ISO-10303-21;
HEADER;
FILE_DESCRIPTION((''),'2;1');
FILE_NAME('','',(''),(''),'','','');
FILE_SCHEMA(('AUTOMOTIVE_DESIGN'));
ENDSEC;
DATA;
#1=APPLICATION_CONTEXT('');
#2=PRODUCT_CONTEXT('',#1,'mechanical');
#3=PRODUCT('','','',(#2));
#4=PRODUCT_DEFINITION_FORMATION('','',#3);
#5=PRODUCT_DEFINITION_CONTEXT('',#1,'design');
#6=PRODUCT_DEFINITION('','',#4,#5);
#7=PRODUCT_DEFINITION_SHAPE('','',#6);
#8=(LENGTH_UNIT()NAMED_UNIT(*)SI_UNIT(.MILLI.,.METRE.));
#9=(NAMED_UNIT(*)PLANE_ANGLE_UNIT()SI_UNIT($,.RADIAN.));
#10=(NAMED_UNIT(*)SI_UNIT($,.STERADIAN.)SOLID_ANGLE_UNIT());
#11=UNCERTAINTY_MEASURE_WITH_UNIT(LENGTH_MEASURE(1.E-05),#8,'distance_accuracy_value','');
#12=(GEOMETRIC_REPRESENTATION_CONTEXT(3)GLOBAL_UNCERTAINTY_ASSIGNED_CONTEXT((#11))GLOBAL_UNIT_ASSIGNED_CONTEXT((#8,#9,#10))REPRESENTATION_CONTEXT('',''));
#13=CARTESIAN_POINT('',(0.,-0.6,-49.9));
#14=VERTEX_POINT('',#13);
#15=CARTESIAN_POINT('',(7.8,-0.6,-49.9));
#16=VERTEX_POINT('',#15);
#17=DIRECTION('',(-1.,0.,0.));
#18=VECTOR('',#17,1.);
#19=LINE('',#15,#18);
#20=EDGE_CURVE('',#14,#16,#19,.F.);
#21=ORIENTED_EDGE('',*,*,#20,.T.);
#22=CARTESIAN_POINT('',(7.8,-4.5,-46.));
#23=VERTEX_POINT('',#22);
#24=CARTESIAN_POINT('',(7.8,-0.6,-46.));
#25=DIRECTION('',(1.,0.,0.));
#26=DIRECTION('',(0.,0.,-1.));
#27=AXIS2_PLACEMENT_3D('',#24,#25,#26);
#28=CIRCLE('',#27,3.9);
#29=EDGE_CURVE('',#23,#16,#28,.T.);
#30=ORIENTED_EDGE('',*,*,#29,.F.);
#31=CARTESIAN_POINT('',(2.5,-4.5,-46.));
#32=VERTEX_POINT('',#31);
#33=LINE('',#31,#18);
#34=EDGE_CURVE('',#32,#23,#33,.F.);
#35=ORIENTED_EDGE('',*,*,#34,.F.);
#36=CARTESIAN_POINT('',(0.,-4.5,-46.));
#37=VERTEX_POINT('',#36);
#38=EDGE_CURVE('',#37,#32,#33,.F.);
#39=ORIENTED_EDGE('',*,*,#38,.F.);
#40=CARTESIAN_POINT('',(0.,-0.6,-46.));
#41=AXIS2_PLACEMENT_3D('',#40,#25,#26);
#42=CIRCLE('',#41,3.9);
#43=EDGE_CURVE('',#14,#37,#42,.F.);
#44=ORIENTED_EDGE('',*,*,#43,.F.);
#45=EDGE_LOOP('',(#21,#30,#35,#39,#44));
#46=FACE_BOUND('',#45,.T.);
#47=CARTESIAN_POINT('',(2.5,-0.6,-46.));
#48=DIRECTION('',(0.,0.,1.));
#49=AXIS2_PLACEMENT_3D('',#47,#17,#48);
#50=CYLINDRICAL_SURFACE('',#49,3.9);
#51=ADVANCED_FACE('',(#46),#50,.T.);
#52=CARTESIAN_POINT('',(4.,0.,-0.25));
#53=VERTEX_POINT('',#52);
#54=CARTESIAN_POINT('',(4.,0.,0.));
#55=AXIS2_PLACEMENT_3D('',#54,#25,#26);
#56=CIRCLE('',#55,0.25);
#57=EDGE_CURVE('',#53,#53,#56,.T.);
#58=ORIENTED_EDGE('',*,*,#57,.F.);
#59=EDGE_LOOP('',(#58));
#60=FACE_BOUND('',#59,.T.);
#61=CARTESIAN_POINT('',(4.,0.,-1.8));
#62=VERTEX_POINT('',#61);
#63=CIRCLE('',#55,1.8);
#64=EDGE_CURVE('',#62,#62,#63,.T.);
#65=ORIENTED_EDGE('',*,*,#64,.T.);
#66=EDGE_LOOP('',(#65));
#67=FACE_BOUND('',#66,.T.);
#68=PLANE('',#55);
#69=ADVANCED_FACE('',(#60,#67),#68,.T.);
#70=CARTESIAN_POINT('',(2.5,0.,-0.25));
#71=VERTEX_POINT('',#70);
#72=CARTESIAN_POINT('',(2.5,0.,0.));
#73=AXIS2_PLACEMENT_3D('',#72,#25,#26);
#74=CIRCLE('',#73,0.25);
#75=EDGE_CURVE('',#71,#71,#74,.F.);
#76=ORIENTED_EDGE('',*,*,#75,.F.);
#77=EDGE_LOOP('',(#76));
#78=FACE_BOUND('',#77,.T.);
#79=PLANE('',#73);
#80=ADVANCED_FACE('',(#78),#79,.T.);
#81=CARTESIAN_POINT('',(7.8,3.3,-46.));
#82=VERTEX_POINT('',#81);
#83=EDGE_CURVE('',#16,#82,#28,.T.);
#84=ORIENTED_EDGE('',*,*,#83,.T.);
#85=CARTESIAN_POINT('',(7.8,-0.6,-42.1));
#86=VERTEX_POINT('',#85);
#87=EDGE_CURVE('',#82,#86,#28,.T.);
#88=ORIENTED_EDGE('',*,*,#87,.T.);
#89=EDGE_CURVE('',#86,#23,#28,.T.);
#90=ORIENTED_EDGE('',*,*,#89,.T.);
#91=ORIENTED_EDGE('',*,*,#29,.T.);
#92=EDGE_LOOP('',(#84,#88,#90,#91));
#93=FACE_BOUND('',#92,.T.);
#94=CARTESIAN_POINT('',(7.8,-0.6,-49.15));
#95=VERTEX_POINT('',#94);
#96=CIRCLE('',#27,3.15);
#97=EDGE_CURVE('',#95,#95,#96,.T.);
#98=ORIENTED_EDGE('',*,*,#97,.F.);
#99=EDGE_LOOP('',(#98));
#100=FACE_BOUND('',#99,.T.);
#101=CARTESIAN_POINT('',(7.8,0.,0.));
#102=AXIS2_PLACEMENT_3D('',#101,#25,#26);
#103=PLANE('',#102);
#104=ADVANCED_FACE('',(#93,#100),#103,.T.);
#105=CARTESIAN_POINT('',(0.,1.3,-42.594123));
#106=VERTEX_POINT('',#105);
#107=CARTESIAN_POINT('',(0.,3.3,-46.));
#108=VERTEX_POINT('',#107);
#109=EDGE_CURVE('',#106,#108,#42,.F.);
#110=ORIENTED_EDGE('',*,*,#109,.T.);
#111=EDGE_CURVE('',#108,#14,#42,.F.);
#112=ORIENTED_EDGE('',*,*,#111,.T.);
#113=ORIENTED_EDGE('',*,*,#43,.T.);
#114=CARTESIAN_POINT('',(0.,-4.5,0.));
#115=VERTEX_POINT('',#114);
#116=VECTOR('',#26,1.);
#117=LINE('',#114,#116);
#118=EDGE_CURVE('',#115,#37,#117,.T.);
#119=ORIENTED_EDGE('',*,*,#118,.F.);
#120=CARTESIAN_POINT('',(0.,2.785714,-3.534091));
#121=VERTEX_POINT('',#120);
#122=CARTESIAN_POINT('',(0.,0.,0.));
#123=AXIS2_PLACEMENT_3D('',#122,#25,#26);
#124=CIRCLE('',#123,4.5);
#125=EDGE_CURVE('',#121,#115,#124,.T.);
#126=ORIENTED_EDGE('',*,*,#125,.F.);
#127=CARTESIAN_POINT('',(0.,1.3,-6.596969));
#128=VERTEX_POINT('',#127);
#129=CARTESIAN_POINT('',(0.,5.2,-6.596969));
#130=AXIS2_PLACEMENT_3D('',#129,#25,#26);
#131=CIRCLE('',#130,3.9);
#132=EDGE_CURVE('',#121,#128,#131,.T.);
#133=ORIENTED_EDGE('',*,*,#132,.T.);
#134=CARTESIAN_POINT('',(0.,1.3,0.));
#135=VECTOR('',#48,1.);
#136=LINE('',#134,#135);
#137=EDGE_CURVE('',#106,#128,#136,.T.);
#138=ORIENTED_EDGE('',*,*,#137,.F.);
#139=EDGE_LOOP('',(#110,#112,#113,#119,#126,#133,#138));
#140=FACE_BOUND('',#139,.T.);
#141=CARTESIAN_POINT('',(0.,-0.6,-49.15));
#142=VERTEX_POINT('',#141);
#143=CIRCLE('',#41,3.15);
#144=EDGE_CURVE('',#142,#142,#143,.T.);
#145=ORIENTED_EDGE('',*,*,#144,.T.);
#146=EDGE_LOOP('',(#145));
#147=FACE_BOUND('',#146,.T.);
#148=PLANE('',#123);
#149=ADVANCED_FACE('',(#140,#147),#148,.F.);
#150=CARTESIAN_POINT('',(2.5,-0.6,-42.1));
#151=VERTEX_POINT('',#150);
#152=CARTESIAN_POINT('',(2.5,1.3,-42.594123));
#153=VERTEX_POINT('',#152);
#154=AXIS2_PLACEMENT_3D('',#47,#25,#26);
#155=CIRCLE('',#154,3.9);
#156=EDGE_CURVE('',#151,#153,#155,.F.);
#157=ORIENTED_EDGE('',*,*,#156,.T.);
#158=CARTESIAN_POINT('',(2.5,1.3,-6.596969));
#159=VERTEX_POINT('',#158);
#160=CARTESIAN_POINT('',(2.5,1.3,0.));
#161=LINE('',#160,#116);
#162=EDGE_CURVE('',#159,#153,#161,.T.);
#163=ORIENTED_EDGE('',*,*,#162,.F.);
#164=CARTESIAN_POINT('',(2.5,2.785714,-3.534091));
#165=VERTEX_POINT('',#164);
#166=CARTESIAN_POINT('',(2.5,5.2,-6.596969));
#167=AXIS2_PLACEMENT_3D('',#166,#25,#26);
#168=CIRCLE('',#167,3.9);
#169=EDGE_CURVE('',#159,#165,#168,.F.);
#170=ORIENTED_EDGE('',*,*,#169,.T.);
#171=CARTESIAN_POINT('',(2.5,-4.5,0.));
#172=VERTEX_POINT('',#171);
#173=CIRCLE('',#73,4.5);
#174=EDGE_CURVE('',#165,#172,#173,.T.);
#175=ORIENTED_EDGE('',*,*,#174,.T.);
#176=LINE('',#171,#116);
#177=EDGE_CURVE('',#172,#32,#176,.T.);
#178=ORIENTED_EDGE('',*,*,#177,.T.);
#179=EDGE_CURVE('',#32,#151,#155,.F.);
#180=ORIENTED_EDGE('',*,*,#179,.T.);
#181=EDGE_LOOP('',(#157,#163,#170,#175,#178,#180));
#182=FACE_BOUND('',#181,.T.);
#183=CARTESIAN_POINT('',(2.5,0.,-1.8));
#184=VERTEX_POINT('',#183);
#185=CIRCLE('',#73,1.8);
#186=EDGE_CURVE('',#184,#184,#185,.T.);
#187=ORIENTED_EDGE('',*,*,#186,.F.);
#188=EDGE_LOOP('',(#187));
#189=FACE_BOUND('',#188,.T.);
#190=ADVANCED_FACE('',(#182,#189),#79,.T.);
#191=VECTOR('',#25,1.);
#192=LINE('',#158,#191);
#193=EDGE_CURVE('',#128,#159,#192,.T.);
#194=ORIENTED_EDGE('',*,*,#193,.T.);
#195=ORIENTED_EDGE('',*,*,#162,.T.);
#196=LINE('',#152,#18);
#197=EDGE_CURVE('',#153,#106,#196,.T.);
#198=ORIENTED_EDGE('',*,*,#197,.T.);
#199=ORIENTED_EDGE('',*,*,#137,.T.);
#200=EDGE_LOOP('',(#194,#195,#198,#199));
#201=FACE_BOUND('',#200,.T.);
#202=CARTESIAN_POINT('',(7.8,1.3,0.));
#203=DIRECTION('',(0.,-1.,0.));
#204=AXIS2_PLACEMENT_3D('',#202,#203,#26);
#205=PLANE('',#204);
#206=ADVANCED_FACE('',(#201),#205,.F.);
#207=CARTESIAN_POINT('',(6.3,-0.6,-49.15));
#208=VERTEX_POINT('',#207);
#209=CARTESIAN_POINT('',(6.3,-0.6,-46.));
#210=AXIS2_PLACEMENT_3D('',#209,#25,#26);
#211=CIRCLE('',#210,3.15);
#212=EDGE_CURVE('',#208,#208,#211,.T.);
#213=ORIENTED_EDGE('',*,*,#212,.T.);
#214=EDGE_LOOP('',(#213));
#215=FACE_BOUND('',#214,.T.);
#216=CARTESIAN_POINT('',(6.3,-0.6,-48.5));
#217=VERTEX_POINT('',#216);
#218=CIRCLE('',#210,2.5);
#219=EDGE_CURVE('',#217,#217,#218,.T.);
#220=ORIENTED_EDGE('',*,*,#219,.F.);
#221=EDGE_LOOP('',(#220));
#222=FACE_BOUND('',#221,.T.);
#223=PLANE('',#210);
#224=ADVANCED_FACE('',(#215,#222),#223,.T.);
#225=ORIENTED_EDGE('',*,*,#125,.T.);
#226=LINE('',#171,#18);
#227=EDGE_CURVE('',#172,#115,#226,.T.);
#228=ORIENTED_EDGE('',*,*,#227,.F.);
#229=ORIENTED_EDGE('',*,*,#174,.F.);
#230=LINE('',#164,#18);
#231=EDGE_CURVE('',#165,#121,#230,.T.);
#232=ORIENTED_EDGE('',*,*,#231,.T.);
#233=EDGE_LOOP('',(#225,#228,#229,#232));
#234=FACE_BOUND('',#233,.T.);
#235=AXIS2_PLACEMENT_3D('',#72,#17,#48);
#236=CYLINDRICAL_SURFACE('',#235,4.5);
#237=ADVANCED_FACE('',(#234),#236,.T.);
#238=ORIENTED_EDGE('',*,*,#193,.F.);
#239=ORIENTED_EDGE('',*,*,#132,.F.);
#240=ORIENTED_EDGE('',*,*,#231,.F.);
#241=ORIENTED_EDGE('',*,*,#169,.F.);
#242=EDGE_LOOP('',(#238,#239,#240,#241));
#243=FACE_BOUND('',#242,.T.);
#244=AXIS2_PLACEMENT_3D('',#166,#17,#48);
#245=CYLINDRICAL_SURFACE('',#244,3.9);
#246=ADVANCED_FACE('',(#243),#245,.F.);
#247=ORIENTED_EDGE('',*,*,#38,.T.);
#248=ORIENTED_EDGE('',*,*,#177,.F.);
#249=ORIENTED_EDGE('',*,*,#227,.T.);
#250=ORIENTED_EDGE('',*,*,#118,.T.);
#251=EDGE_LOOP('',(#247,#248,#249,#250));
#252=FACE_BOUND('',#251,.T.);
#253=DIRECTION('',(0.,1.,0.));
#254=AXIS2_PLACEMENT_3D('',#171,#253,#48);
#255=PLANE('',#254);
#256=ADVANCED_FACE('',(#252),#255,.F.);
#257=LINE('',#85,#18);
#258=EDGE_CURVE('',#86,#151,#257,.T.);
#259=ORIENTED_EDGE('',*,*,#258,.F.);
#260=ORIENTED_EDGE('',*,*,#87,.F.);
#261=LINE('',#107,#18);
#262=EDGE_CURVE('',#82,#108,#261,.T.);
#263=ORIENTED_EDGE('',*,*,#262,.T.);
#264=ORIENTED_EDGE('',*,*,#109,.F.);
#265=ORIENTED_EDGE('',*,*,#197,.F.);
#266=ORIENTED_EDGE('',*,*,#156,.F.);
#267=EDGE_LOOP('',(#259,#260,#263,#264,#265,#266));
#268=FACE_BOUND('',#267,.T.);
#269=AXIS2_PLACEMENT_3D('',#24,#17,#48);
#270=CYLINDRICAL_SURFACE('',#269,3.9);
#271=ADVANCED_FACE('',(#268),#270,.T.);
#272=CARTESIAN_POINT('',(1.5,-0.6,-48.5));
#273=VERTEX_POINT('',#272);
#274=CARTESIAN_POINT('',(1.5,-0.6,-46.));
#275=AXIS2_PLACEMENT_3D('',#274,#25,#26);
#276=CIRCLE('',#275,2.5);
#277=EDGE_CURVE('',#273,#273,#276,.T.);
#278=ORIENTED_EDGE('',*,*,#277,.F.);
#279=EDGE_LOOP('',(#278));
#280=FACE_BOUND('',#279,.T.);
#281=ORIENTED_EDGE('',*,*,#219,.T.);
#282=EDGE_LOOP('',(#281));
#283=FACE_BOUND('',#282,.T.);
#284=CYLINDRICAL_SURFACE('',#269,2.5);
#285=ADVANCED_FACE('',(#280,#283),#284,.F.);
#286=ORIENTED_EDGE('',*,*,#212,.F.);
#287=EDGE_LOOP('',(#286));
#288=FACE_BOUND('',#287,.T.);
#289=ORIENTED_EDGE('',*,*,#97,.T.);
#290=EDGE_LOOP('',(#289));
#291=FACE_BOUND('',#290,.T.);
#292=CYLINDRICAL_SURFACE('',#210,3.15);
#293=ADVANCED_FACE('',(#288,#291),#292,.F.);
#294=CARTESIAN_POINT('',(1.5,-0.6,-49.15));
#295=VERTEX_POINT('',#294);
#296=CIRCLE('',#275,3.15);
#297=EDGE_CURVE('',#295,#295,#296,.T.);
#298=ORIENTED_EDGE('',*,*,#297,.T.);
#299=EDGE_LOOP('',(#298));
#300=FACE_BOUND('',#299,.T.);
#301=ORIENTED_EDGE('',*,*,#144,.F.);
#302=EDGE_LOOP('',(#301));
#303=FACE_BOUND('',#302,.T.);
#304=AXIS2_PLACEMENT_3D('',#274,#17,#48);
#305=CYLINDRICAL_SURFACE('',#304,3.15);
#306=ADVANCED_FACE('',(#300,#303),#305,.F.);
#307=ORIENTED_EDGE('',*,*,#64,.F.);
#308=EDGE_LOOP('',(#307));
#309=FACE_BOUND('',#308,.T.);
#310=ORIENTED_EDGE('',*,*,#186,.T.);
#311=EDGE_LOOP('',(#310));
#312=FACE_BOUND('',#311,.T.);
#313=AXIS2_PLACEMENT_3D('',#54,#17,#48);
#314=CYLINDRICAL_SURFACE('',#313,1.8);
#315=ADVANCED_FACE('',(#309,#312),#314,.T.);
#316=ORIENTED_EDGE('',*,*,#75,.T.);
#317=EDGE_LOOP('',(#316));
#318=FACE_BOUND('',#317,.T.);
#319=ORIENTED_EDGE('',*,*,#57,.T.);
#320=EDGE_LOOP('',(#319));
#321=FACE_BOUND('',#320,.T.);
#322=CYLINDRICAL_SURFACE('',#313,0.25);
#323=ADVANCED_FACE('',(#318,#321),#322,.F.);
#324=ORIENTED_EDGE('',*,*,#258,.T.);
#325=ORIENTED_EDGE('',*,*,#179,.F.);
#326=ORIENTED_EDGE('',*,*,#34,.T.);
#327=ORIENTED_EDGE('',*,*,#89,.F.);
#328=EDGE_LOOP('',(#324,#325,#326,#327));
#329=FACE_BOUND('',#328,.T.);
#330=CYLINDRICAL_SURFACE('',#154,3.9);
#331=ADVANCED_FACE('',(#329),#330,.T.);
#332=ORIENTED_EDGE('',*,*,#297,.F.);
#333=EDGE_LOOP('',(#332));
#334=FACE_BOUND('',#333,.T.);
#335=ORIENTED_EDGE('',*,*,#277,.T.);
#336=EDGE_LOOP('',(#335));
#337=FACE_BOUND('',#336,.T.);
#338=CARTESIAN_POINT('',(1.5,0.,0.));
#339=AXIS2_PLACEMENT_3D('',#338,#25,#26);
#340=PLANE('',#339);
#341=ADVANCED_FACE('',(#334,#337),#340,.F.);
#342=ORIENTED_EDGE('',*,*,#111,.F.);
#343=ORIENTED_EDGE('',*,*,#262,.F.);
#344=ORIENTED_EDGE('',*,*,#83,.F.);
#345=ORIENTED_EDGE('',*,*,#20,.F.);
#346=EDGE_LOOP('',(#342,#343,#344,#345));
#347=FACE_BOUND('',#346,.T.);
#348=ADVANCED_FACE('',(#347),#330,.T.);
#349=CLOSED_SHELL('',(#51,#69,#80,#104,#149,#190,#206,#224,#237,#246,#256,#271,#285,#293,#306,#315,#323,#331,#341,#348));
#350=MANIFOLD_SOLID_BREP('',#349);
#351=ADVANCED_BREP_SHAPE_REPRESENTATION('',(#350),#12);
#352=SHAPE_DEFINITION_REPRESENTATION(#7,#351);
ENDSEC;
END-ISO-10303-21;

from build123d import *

# Parameters (mm, degrees)
SKETCH_1_R               = 4.5
SKETCH_1_W               = 49.9
SKETCH_1_H               = 7.8
EXTRUDE_1_DEPTH          = 2.5
EXTRUDE_START            = 2.5
SKETCH_1_6_R             = 1.8
SKETCH_1_6_R_2           = 0.25
EXTRUDE_3_DEPTH          = 1.5
SKETCH_1_5_W             = 7.8
SKETCH_1_5_H             = 7.8
EXTRUDE_2_DEPTH          = 7.8
SKETCH_1_7_R             = 2.5
CUT_EXTRUDE_1_DEPTH      = 51.706015422
SKETCH_1_8_R             = 3.15
SKETCH_1_8_R_2           = 2.5
CUT_EXTRUDE_2_DEPTH      = 1.5
CUT_EXTRUDE_START        = 6.3
SKETCH_1_9_R             = 3.15
SKETCH_1_9_R_2           = 2.5
CUT_EXTRUDE_3_DEPTH      = 1.5
SKETCH_2_W               = 0.191868154
SKETCH_2_H               = 2
SKETCH_2_W_2             = 37.6
CUT_EXTRUDE_4_DEPTH      = 51.706015422
FILLET_1_R               = 3.9
CUT_EXTRUDE_5_DEPTH      = 52.59021225
CUT_EXTRUDE_5_DEPTH_BACK = 52.59021225
SKETCH_3_W               = 77.270537225
SKETCH_3_H               = 10.975298688


with BuildPart() as part:
    # 草图1 → 凸台-拉伸1 (new body)
    with BuildSketch(Plane(origin=(0, 0, 0), x_dir=(0, 0, -1), z_dir=(1, 0, 0))):
        Circle(SKETCH_1_R)
        with Locations((24.95, -0.6)):
            Rectangle(SKETCH_1_W, SKETCH_1_H)
    extrude(amount=EXTRUDE_1_DEPTH)

    # 草图1<6> → 凸台-拉伸3 (add)
    with BuildSketch(Plane(origin=(0, 0, 0), x_dir=(0, 0, -1), z_dir=(1, 0, 0)).offset(EXTRUDE_START)):
        Circle(SKETCH_1_6_R)
        Circle(SKETCH_1_6_R_2, mode=Mode.SUBTRACT)
    extrude(amount=EXTRUDE_3_DEPTH)

    # 草图1<5> → 凸台-拉伸2 (add)
    with BuildSketch(Plane(origin=(0, 0, 0), x_dir=(0, 0, -1), z_dir=(1, 0, 0))):
        with Locations((46, -0.6)):
            Rectangle(SKETCH_1_5_W, SKETCH_1_5_H)
    extrude(amount=EXTRUDE_2_DEPTH)

    # 草图1<7> → 切除-拉伸1 (cut, through all)
    with BuildSketch(Plane(origin=(0, 0, 0), x_dir=(0, 0, -1), z_dir=(1, 0, 0))):
        with Locations((46, -0.6)):
            Circle(SKETCH_1_7_R)
    extrude(amount=CUT_EXTRUDE_1_DEPTH, mode=Mode.SUBTRACT)

    # 草图1<8> → 切除-拉伸2 (cut)
    with BuildSketch(Plane(origin=(0, 0, 0), x_dir=(0, 0, -1), z_dir=(1, 0, 0))):
        with Locations((46, -0.6)):
            Circle(SKETCH_1_8_R)
        with Locations((46, -0.6)):
            Circle(SKETCH_1_8_R_2, mode=Mode.SUBTRACT)
    extrude(amount=CUT_EXTRUDE_2_DEPTH, mode=Mode.SUBTRACT)

    # 草图1<9> → 切除-拉伸3 (cut)
    with BuildSketch(Plane(origin=(0, 0, 0), x_dir=(0, 0, -1), z_dir=(1, 0, 0)).offset(CUT_EXTRUDE_START)):
        with Locations((46, -0.6)):
            Circle(SKETCH_1_9_R)
        with Locations((46, -0.6)):
            Circle(SKETCH_1_9_R_2, mode=Mode.SUBTRACT)
    extrude(amount=CUT_EXTRUDE_3_DEPTH, mode=Mode.SUBTRACT)

    # 草图2 → 切除-拉伸4 (cut, through all)
    with BuildSketch(Plane.ZY):
        with BuildLine():
            Line((-3.059411708, 3.3), (-4.308131846, 3.3))
            Line((-4.308131846, 3.3), (-4.308131846, 1.3))
            ThreePointArc((-4.308131846, 1.3), (-3.817089795, 2.383238447), (-3.059411708, 3.3))
        make_face()
        with Locations((-4.404065923, 2.3)):
            Rectangle(SKETCH_2_W, SKETCH_2_H)
        with Locations((-23.3, 2.3)):
            Rectangle(SKETCH_2_W_2, SKETCH_2_H)
    extrude(amount=-CUT_EXTRUDE_4_DEPTH, mode=Mode.SUBTRACT)

    # 圆角1
    fillet_1_edges = [part.edges().sort_by_distance(p)[0] for p in [
        (1.25, 1.3, -4.308131846),
    ]]
    fillet(fillet_1_edges, radius=FILLET_1_R)
    fillet_1_2_edges = [part.edges().sort_by_distance(p)[0] for p in [
        (3.9, -4.5, -49.9),
        (3.9, 3.3, -49.9),
        (5.15, -4.5, -42.1),
        (3.9, 3.3, -42.1),
    ]]
    fillet(fillet_1_2_edges, radius=FILLET_1_R - 0.0001)  # a hair under: the kernel refuses the full size


with BuildPart() as body_2:
    # 镜向2: mirrored copy
    add(part.part.mirror(Plane.ZY.offset(1)))

    # 草图3 → 切除-拉伸5 (cut, two sides: drawn at the far end of the back side and taken through both)
    with BuildSketch(Plane(origin=(-4.5, 0, 0), x_dir=(0, 0, 1), z_dir=(0, -1, 0)).offset(-CUT_EXTRUDE_5_DEPTH_BACK)):
        with Locations((-16.91889565, 1.946720459)):
            Rectangle(SKETCH_3_W, SKETCH_3_H)
    extrude(amount=CUT_EXTRUDE_5_DEPTH + CUT_EXTRUDE_5_DEPTH_BACK, mode=Mode.SUBTRACT)


solid = part.part
